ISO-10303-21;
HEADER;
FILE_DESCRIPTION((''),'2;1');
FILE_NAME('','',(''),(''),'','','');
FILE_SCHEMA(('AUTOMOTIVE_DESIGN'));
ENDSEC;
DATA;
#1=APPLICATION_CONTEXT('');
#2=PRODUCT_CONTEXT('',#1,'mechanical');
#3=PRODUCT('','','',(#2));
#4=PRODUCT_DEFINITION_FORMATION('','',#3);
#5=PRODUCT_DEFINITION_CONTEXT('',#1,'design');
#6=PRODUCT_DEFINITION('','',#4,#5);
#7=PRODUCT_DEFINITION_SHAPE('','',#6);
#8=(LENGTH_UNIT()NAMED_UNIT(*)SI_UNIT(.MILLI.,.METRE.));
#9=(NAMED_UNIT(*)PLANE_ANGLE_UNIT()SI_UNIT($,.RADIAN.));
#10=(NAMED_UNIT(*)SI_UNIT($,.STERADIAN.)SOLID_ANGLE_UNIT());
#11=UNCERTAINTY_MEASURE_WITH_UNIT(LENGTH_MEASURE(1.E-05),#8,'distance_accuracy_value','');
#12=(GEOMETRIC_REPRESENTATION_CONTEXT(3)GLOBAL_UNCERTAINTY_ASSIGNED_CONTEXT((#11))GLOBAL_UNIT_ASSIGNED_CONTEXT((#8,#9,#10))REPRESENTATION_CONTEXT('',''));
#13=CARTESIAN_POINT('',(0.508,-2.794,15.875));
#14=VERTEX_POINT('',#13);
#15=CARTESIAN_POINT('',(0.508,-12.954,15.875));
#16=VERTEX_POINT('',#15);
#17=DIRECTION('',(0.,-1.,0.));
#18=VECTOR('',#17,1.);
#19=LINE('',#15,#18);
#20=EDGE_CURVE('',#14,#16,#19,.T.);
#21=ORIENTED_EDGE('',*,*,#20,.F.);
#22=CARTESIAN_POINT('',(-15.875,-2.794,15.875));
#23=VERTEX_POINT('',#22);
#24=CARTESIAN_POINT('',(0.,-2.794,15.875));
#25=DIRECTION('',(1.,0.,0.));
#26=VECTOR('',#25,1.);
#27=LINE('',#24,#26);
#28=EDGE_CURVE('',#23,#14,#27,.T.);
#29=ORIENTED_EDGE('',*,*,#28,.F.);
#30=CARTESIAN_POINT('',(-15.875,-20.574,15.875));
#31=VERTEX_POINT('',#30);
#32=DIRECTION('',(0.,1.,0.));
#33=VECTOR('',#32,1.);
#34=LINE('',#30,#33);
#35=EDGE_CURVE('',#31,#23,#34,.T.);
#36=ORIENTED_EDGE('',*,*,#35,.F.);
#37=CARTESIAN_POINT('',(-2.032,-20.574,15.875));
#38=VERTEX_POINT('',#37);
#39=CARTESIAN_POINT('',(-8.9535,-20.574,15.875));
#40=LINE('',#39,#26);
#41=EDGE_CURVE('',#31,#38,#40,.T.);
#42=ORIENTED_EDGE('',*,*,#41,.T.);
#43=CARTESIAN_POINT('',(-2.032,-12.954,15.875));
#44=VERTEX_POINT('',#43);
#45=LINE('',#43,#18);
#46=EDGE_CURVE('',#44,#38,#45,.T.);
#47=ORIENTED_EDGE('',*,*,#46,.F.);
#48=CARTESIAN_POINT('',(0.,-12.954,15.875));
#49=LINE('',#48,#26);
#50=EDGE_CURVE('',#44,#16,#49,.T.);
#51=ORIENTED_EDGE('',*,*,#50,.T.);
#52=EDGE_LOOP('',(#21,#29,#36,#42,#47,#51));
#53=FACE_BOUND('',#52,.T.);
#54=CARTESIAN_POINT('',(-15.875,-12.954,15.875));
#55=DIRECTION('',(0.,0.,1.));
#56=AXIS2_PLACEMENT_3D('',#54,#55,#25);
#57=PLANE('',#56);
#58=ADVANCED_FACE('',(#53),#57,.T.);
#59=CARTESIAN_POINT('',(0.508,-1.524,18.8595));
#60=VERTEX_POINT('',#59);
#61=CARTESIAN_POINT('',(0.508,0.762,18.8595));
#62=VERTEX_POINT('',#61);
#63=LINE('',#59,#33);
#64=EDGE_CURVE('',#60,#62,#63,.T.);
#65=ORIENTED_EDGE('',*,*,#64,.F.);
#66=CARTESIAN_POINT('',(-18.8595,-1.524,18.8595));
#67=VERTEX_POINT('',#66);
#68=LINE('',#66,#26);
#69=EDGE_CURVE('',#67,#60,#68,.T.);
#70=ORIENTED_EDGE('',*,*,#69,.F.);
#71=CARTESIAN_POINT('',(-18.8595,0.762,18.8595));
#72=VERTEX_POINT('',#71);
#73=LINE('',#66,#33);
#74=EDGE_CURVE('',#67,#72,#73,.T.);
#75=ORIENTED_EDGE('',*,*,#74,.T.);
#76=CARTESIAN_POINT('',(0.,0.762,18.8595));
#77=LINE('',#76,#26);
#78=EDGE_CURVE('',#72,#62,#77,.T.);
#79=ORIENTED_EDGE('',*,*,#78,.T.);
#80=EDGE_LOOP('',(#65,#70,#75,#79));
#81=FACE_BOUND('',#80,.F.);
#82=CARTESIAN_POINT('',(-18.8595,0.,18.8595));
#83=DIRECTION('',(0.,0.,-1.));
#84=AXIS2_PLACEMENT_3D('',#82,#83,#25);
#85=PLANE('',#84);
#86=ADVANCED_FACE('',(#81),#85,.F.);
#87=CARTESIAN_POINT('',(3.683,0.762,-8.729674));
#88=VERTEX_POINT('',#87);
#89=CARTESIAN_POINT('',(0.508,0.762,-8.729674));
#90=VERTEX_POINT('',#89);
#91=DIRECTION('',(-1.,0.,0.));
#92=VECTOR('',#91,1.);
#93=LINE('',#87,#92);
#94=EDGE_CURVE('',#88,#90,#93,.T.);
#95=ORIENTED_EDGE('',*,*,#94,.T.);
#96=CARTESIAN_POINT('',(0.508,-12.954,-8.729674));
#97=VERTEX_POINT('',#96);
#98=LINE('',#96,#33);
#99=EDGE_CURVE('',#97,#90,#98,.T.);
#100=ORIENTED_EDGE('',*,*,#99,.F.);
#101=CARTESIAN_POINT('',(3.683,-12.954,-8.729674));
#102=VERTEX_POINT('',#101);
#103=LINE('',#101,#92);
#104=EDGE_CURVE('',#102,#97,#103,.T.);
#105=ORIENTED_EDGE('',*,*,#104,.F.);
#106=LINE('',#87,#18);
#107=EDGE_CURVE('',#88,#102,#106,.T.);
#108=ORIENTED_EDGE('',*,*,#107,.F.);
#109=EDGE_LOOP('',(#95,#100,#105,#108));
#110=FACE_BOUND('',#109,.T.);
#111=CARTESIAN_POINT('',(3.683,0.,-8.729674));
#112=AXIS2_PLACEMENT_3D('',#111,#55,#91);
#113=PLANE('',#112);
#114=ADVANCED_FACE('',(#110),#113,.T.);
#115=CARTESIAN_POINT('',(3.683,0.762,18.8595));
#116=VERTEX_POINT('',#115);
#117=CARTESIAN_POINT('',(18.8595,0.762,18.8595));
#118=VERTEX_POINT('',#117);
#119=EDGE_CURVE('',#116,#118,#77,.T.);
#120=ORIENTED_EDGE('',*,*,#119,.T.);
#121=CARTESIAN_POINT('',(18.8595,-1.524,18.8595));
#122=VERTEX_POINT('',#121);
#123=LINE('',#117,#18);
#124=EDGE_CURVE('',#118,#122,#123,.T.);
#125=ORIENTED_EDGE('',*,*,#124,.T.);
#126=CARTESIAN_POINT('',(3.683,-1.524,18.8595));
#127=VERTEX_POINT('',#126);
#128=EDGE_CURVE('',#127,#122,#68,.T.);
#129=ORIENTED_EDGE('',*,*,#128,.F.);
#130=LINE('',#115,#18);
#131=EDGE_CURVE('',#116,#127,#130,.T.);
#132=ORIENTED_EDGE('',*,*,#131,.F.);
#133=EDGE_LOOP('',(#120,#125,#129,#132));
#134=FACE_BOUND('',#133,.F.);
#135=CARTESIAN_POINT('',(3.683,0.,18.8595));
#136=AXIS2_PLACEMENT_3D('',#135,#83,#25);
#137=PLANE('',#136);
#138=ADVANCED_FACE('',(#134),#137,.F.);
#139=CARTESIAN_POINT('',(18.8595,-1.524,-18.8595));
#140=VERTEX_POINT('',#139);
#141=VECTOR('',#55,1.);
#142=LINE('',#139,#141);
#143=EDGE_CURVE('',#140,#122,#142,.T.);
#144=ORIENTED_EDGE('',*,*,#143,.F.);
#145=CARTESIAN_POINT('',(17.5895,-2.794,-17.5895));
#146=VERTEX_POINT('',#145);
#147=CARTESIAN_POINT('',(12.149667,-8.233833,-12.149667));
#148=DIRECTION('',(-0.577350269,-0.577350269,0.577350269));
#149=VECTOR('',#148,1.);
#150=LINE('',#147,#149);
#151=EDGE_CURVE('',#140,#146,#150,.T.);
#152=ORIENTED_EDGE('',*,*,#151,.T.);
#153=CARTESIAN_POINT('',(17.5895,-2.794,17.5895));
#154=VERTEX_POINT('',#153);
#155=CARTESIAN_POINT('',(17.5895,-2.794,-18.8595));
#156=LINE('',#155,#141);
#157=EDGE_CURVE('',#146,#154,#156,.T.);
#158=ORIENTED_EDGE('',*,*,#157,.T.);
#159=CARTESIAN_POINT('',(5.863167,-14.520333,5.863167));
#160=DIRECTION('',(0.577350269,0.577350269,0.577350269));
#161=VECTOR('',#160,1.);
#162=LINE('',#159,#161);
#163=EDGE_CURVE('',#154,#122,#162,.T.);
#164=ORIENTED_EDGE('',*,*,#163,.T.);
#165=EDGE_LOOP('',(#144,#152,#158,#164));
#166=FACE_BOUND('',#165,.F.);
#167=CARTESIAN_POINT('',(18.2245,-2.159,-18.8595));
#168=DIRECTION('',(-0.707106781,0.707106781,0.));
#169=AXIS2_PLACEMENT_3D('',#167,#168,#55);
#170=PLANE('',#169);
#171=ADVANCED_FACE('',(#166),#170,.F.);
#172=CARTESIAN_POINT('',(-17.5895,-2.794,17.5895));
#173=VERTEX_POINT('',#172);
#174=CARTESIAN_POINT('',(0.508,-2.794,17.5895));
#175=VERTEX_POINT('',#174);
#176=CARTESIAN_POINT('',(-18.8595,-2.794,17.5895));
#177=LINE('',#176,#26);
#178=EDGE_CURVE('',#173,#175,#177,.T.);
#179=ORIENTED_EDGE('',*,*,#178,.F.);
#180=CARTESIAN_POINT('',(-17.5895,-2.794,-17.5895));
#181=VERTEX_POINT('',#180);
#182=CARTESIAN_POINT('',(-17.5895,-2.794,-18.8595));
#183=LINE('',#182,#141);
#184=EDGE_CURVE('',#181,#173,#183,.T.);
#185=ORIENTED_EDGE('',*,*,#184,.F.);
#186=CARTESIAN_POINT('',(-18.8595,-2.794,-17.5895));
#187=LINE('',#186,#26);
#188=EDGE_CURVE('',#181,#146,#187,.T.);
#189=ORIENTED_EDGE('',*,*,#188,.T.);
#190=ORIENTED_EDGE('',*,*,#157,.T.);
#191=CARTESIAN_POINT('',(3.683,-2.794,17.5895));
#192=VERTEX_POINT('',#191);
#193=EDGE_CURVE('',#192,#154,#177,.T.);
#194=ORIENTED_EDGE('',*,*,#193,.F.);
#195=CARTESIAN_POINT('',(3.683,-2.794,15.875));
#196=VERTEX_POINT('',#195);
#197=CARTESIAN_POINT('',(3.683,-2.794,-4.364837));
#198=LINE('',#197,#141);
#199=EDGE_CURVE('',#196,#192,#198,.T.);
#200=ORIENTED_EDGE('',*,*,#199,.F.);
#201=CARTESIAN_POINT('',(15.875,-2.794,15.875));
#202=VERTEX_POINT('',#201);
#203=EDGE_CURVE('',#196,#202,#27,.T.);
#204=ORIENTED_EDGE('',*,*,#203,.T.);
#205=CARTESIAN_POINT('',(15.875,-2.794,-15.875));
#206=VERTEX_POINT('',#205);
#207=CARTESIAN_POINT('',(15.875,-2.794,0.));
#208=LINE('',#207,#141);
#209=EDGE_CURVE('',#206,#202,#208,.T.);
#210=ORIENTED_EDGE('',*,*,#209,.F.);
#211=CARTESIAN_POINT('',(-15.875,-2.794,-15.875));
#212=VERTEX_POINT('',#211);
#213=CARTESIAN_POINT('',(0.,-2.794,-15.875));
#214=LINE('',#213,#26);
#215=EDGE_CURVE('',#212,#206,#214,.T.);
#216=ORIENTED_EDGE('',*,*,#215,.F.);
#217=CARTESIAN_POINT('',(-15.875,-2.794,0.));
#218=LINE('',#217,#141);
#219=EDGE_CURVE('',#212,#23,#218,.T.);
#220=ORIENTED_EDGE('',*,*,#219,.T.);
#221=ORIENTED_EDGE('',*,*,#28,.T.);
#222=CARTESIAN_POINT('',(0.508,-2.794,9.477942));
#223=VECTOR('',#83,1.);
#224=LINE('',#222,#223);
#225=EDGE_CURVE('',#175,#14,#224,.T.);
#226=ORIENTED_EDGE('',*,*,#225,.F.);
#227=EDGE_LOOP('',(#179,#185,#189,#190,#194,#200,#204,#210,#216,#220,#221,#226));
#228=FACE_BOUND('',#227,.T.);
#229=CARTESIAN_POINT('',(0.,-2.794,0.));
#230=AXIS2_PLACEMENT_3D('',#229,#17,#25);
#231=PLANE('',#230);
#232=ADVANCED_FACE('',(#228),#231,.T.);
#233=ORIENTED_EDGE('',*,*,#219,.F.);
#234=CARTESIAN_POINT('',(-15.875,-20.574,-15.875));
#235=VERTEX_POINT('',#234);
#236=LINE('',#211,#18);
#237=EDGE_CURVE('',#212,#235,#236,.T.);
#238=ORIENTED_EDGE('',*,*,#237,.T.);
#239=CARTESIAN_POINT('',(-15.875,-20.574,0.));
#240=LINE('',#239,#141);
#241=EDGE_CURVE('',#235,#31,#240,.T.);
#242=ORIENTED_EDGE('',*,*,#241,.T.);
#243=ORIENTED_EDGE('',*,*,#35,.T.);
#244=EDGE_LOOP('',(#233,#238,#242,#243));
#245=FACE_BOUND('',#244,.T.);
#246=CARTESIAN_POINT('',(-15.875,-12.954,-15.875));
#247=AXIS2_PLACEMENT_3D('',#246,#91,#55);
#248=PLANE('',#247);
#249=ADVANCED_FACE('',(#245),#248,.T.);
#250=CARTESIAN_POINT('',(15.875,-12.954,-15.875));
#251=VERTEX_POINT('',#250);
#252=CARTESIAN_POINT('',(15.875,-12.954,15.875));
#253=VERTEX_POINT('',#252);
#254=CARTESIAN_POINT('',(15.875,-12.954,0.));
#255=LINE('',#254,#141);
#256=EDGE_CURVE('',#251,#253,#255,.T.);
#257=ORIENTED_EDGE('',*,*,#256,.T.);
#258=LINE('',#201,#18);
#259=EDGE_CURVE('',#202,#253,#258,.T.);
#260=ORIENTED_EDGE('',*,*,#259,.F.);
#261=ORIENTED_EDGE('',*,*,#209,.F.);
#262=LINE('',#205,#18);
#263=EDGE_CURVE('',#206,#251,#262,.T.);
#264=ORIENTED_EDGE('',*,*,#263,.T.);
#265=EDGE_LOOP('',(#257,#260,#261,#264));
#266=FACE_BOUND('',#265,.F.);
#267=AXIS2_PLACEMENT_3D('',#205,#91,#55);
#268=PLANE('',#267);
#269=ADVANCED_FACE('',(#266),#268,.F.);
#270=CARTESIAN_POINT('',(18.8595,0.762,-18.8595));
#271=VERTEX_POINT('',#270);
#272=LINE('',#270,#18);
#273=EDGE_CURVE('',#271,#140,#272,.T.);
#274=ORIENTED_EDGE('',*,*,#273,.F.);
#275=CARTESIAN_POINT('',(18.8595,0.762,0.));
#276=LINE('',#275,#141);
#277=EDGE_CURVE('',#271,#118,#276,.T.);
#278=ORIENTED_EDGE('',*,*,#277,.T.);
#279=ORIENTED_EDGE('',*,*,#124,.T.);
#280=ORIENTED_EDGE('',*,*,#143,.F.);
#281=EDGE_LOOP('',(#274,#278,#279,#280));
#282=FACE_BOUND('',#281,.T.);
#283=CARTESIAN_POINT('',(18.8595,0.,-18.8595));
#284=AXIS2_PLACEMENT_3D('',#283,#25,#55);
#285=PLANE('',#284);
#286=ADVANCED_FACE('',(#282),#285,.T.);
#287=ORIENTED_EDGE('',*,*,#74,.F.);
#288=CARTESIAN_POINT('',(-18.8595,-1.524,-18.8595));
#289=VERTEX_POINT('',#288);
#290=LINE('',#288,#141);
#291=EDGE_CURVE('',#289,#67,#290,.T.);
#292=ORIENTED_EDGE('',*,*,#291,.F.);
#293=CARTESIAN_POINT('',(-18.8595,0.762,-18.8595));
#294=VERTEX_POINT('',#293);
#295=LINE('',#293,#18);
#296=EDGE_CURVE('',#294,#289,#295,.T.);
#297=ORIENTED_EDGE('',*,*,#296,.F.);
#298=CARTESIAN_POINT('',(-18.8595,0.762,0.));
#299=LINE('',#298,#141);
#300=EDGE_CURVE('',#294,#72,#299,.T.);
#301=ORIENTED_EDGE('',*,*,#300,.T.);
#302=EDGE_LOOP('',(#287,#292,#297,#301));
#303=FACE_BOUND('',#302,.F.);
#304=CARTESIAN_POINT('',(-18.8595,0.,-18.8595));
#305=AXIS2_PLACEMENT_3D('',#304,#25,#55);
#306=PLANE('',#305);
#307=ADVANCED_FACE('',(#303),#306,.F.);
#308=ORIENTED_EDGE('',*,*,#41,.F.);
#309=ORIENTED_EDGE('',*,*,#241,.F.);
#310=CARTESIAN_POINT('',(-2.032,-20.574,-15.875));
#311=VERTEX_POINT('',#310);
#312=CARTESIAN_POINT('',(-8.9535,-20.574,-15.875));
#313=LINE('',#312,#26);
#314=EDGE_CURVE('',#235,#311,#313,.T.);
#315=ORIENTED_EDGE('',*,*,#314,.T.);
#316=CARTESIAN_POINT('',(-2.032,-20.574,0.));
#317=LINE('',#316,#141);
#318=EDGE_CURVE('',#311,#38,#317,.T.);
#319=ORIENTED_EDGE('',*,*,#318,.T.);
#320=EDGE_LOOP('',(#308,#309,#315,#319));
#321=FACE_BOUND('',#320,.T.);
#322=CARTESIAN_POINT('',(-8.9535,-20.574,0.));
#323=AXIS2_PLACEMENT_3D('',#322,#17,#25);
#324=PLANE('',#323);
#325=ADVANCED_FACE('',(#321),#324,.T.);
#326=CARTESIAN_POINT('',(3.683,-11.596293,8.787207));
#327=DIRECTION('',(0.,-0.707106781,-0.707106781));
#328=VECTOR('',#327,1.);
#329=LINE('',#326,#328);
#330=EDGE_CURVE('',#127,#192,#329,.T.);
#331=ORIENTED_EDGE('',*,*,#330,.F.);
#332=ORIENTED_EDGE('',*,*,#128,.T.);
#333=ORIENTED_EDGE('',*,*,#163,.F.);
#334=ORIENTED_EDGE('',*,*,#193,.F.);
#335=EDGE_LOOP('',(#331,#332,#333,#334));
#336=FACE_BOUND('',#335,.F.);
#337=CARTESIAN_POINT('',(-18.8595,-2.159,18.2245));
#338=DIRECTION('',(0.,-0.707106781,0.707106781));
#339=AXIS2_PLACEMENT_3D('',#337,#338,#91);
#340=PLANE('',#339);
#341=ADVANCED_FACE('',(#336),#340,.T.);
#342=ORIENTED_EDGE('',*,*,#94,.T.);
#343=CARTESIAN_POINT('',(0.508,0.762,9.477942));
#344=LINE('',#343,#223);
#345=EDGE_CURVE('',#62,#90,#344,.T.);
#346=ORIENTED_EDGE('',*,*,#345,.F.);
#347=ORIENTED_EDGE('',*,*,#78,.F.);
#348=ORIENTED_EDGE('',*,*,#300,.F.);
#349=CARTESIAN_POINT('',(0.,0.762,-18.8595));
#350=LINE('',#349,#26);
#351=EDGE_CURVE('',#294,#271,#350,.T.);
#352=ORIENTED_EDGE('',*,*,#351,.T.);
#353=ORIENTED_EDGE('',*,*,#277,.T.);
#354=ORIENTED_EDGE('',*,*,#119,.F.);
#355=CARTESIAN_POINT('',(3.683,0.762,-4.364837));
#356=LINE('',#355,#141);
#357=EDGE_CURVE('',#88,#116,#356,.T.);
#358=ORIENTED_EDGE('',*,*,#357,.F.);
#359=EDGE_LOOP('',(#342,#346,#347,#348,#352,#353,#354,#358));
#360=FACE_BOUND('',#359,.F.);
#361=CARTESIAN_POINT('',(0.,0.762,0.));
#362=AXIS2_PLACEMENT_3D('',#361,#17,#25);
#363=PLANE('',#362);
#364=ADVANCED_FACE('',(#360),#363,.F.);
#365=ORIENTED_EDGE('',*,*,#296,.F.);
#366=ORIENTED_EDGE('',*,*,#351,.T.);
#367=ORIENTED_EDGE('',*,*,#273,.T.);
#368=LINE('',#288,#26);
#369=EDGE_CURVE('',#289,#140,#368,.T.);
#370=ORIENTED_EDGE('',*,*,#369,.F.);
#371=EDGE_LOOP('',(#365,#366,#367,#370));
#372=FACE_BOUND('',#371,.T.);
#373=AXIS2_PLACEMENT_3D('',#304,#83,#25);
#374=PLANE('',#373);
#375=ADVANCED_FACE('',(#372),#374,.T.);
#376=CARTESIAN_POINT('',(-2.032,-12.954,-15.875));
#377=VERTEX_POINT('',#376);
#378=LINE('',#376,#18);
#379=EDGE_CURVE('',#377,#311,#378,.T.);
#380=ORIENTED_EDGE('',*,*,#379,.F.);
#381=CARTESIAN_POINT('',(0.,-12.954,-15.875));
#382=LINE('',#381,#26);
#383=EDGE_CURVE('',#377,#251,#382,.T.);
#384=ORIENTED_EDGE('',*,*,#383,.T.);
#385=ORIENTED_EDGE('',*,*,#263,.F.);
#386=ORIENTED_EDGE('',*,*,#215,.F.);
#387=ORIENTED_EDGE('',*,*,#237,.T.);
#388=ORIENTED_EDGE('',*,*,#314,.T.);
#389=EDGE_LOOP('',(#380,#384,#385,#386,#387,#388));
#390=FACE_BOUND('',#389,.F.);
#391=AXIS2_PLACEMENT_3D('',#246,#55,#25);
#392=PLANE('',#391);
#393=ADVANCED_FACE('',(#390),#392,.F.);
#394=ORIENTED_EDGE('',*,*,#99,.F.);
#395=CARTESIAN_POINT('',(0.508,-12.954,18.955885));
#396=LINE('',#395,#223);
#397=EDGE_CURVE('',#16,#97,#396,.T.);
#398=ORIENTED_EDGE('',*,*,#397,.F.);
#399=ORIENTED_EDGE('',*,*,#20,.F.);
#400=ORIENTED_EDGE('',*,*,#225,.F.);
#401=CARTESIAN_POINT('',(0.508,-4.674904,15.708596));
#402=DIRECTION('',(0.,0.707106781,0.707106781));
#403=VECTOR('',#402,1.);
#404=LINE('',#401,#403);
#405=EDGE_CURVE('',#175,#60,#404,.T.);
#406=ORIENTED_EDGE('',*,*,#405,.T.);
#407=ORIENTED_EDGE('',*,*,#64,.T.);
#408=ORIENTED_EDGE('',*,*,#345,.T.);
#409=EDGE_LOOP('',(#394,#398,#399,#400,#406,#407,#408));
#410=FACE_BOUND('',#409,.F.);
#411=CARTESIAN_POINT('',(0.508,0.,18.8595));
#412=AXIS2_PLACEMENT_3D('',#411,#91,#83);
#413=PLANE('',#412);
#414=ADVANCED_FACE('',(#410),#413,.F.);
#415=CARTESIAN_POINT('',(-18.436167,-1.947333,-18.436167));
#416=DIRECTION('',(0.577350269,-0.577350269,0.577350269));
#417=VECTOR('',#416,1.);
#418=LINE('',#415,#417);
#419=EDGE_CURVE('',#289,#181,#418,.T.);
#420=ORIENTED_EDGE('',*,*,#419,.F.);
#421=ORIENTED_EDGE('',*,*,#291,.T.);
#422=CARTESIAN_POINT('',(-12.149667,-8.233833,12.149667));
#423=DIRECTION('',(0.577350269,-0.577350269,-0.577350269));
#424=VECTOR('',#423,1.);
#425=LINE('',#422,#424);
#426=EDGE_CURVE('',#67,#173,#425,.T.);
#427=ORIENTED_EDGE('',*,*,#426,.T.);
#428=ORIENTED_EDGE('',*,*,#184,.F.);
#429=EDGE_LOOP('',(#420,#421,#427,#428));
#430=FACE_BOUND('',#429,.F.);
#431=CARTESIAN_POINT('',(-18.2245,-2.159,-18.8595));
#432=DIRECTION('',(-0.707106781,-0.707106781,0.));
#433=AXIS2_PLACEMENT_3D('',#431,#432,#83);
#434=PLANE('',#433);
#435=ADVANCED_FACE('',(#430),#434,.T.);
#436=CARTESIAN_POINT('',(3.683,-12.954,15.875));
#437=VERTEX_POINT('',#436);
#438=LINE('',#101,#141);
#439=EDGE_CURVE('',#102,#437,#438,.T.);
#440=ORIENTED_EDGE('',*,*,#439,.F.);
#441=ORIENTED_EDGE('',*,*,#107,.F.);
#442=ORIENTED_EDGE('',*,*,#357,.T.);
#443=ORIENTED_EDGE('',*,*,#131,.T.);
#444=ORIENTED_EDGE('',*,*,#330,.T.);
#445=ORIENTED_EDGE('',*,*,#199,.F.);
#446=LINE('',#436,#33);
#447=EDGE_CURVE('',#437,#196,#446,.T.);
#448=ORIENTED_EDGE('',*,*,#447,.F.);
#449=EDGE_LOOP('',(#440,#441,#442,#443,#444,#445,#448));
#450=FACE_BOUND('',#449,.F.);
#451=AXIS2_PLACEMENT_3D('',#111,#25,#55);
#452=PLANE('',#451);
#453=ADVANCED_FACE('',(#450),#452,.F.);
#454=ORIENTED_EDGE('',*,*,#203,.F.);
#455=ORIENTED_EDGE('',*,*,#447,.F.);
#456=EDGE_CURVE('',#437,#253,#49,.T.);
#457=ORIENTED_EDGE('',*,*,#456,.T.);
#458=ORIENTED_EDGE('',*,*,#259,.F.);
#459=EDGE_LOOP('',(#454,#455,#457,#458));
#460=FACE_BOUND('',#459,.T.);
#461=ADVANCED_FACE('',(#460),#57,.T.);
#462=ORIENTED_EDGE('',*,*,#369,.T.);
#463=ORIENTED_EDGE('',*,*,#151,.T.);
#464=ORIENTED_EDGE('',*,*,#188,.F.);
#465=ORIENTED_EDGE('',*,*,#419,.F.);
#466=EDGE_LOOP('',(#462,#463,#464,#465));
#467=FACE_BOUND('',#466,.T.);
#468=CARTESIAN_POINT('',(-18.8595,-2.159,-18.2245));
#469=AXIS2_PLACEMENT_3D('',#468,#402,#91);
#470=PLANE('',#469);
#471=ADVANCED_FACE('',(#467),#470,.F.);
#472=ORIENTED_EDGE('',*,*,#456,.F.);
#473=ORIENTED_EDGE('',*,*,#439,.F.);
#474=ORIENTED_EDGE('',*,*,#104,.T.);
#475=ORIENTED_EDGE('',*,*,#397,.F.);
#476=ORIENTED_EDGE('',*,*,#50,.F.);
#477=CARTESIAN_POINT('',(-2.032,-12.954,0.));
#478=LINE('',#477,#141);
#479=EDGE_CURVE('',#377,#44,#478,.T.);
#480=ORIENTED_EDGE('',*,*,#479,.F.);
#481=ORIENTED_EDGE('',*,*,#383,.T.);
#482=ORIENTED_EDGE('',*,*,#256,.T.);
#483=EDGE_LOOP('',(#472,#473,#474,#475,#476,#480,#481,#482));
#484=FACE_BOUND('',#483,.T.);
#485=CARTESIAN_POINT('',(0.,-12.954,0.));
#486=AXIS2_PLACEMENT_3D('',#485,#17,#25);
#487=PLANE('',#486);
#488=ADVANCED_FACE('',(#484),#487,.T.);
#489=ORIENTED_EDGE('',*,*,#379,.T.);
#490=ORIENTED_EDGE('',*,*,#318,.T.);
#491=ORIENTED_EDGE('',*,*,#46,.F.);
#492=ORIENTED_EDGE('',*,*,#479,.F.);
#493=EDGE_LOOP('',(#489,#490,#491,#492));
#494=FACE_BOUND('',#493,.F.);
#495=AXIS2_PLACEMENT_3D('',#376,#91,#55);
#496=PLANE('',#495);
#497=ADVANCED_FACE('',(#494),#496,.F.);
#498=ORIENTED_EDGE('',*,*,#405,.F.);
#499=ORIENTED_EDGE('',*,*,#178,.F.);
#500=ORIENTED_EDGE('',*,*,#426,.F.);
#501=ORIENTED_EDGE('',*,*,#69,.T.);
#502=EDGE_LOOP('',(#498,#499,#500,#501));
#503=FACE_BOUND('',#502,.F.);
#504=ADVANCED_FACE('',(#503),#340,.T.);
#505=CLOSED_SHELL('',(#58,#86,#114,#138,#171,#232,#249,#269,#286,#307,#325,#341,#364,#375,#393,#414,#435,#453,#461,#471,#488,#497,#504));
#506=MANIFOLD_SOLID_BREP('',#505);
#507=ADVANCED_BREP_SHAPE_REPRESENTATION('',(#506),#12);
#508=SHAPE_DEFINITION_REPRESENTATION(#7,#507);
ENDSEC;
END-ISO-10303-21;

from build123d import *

# Parameters (mm, degrees)
F0_W      = 37.719
F0_H      = 37.719
F1_DEPTH  = 2.794
F2_W      = 31.75
F2_H      = 31.75
F3_DEPTH  = 10.16
F4_SIZE   = 1.27
F5_W      = 13.843
F5_H      = 31.75
F6_DEPTH  = 7.62
F7_W      = 3.175
F7_H      = 24.6046739221
F7_H_2    = 3.0808845013
F8_DEPTH  = 12.955
F9_W      = 3.1516091073
F9_H      = 27.5891739221
F10_DEPTH = 20.575
F11_DEPTH = 0.762


# Not quite as in the source:
# - a feature names something its author has since deleted; it is built from what else it names


with BuildPart() as f1:
    # F0 (on Front) → F1 (new body)
    with BuildSketch(Plane.XZ):
        Rectangle(F0_W, F0_H)
    extrude(amount=F1_DEPTH)

    # F2 (on face) → F3 (join)
    with BuildSketch(Plane.XZ.offset(2.794)):
        Rectangle(F2_W, F2_H)
    extrude(amount=F3_DEPTH)

    # F4
    f4_edges = [f1.edges().sort_by_distance(p)[0] for p in [
        (-18.8595, -2.794, 0),
        (0, -2.794, -18.8595),
        (18.8595, -2.794, 0),
        (0, -2.794, 18.8595),
    ]]
    chamfer(f4_edges, length=F4_SIZE)

    # F5 (on face) → F6 (join)
    with BuildSketch(Plane.XZ.offset(12.954)):
        with Locations((-8.9535, 0)):
            Rectangle(F5_W, F5_H)
    extrude(amount=F6_DEPTH)

    # F7 (on face) → F8 (cut, through all)
    with BuildSketch(Plane.XZ.offset(12.954)):
        with Locations((2.0955, 3.572663039)):
            Rectangle(F7_W, F7_H)
        with Locations((2.0955, 17.4154422507)):
            Rectangle(F7_W, F7_H_2)
    extrude(amount=-F8_DEPTH, mode=Mode.SUBTRACT)

    # F9 (on face) → F10 (cut, through all)
    with BuildSketch(Plane(origin=(0, 0, 0), x_dir=(-1, 0, 0), z_dir=(0, 1, 0))):
        with Locations((-2.0838045536, 5.064913039)):
            Rectangle(F9_W, F9_H)
    extrude(amount=-F10_DEPTH, mode=Mode.SUBTRACT)

    # F11 (add): a face of the model
    f11_faces = [f1.faces().sort_by_distance(p)[0] for p in [
        (-0.1374824949, 0, -0.3323010646),
    ]]
    extrude(f11_faces, amount=F11_DEPTH)


solid = f1.part
